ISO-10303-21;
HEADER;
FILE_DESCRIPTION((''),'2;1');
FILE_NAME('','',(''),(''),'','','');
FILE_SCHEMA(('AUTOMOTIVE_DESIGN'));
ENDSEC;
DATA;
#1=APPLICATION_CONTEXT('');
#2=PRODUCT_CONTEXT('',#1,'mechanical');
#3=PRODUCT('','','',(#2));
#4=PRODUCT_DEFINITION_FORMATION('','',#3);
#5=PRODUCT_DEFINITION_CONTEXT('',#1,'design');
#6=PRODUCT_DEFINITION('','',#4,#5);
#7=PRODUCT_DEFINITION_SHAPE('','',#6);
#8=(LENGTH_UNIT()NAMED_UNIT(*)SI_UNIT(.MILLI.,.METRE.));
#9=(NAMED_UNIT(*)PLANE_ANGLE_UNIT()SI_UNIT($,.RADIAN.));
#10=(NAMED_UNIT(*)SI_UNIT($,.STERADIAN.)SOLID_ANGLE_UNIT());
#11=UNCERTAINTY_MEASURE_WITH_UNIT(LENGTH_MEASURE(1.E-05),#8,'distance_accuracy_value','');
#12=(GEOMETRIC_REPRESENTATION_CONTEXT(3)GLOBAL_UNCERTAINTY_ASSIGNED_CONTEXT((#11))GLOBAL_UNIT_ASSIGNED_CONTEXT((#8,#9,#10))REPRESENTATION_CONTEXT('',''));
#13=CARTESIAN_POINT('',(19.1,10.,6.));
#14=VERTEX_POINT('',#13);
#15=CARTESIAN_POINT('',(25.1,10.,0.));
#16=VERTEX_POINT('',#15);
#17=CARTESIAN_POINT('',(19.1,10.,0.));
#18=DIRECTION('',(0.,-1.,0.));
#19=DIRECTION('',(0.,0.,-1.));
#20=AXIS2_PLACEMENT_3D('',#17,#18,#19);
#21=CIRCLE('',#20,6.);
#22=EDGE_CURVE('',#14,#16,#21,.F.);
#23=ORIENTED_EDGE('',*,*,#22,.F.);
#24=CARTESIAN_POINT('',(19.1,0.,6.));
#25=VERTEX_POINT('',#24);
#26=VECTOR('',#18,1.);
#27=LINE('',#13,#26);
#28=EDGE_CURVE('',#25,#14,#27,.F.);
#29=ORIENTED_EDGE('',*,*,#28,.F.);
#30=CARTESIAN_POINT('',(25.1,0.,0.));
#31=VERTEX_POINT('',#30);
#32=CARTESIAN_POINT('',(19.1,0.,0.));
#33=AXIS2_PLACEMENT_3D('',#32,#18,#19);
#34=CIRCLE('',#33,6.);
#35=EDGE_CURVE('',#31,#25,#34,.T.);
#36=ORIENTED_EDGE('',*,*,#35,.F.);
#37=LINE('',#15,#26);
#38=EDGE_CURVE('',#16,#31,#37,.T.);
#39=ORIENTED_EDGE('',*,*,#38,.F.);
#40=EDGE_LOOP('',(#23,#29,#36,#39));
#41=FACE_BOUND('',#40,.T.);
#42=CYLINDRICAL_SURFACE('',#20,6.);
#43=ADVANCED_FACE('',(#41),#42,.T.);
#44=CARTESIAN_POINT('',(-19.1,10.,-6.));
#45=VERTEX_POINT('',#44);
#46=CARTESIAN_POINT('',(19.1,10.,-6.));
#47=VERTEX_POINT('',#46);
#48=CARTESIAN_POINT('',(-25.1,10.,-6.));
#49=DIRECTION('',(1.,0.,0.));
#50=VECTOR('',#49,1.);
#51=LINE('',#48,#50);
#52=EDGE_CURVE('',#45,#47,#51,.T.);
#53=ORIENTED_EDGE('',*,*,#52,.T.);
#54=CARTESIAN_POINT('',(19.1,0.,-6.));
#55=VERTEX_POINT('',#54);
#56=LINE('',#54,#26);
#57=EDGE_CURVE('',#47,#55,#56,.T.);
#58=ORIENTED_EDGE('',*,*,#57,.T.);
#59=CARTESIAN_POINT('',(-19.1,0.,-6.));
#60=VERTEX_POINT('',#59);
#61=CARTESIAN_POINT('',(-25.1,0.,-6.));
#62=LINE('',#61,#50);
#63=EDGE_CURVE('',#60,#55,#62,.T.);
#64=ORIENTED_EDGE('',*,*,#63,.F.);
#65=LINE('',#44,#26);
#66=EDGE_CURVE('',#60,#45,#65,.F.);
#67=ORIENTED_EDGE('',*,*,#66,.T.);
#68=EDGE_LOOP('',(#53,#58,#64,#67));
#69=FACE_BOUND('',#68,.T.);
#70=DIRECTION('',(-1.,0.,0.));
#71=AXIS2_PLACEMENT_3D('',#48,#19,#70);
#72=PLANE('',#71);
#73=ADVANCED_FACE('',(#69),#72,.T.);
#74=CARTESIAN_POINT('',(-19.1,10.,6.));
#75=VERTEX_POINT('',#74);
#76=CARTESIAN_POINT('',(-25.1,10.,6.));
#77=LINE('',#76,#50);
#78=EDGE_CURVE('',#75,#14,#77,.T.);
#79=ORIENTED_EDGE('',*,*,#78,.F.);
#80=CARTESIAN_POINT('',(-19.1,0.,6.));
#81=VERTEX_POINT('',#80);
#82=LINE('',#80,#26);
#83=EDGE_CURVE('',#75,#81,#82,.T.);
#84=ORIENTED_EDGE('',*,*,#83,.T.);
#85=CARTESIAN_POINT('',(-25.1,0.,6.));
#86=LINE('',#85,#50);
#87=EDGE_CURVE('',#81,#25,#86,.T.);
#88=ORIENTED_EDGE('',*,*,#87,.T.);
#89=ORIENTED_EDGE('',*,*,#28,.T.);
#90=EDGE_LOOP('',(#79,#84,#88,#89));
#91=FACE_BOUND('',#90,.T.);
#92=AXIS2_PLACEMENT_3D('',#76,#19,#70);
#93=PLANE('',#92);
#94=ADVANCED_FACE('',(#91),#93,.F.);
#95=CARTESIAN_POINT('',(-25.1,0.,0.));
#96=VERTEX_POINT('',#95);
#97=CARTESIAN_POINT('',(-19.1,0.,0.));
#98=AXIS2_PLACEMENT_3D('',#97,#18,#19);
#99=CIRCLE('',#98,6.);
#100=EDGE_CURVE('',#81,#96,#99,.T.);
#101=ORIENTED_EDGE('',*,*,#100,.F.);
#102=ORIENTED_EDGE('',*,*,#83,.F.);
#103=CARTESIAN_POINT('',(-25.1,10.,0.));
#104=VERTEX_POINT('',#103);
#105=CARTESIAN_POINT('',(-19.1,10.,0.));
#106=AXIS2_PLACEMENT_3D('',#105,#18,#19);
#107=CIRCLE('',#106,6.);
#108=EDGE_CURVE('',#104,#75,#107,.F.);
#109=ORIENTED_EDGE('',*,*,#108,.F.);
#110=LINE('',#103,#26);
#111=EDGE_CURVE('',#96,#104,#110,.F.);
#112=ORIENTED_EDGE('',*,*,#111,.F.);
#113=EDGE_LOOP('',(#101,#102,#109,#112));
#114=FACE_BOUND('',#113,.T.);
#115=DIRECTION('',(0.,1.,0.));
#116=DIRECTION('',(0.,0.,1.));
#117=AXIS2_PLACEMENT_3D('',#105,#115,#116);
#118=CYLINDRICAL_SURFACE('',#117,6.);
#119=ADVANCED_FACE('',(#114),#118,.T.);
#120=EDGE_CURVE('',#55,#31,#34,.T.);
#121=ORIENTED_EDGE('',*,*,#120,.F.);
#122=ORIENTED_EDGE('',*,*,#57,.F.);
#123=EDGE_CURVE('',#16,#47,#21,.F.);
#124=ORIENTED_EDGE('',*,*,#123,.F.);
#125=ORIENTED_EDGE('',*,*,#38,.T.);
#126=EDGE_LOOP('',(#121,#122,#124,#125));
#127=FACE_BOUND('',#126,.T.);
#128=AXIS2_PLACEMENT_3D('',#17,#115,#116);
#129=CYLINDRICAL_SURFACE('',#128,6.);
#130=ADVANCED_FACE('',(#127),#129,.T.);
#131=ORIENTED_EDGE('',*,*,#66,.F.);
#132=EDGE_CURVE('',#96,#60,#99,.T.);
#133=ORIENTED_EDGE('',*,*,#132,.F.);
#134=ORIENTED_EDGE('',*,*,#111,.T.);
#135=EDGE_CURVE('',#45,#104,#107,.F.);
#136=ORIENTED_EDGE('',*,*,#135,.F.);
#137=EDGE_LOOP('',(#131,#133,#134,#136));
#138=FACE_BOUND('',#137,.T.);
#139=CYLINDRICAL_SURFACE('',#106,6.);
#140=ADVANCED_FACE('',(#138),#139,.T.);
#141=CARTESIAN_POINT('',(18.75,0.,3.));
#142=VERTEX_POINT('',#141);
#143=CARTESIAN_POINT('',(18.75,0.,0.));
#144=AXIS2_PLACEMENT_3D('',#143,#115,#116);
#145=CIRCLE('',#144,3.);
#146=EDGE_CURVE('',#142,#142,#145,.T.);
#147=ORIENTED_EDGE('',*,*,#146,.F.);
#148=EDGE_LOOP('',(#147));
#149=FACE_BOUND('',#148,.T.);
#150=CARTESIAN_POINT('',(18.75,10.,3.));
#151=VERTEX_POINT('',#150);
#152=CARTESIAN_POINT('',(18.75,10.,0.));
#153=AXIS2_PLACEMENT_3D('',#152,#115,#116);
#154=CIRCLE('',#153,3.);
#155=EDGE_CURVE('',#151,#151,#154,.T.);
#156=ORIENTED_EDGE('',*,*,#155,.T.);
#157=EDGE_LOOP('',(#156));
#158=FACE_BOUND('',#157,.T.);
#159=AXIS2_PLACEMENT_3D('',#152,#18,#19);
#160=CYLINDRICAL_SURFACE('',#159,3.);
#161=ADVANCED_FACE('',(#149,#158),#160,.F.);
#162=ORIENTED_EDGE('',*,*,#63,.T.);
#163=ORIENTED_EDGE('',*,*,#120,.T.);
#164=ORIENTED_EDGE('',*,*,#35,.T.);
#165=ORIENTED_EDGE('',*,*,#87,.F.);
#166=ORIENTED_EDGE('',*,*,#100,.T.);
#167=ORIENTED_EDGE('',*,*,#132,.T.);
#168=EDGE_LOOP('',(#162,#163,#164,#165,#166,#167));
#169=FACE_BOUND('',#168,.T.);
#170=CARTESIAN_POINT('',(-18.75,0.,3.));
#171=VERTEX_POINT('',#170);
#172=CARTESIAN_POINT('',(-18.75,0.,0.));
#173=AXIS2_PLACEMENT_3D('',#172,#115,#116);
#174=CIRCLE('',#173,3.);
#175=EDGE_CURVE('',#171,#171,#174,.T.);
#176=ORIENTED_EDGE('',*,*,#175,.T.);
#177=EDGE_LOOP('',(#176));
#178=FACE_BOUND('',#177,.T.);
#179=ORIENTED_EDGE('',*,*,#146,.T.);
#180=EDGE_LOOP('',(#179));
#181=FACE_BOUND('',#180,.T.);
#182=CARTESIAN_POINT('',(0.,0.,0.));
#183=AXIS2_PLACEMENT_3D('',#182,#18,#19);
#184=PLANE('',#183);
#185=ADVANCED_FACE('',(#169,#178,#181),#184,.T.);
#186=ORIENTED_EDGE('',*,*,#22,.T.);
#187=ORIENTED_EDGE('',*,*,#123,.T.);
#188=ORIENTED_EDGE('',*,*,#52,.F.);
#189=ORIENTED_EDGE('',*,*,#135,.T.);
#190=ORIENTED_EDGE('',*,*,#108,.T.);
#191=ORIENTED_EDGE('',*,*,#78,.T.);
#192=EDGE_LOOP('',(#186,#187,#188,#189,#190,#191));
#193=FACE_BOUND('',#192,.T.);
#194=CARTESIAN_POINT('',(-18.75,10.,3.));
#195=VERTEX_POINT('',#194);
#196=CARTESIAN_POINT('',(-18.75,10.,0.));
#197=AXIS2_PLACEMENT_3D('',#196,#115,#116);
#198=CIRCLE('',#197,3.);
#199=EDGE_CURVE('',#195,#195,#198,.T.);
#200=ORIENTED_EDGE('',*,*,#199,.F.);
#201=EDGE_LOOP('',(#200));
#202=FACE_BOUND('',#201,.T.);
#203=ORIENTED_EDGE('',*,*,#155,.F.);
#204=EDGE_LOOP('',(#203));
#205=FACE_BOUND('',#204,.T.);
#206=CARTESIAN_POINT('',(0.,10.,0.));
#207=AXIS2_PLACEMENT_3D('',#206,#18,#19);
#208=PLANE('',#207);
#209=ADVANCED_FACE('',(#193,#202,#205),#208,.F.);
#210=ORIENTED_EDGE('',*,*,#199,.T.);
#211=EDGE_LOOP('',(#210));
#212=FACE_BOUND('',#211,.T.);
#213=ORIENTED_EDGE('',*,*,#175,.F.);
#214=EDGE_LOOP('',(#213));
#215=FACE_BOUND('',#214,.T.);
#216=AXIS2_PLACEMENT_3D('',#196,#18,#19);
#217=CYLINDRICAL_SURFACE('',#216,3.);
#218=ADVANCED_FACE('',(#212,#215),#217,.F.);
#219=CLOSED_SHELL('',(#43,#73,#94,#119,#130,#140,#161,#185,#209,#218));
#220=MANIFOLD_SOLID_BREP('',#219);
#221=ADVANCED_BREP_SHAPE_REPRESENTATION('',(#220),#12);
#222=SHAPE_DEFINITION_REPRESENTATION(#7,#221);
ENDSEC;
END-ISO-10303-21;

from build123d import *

# Parameters (mm, degrees)
SKETCH1_W           = 50.2
SKETCH1_H           = 12
SKETCH1_R           = 3
BOSS_EXTRUDE1_DEPTH = 10
FILLET1_R           = 6


with BuildPart() as part:
    # Sketch1 → Boss-Extrude1 (new body)
    with BuildSketch(Plane(origin=(0, 0, 0), x_dir=(1, 0, 0), z_dir=(0, 1, 0))):
        Rectangle(SKETCH1_W, SKETCH1_H)
        with Locations(Location((18.75, 0, 0), (0, 0, 270))):
            Circle(SKETCH1_R, mode=Mode.SUBTRACT)
        with Locations(Location((-18.75, 0, 0), (0, 0, 270))):
            Circle(SKETCH1_R, mode=Mode.SUBTRACT)
    extrude(amount=BOSS_EXTRUDE1_DEPTH)

    # Fillet1
    fillet1_edges = [part.edges().sort_by_distance(p)[0] for p in [
        (25.1, 5, -6),
        (25.1, 5, 6),
        (-25.1, 5, -6),
        (-25.1, 5, 6),
    ]]
    fillet(fillet1_edges, radius=FILLET1_R - 0.0001)  # a hair under: the kernel refuses the full size


solid = part.part
